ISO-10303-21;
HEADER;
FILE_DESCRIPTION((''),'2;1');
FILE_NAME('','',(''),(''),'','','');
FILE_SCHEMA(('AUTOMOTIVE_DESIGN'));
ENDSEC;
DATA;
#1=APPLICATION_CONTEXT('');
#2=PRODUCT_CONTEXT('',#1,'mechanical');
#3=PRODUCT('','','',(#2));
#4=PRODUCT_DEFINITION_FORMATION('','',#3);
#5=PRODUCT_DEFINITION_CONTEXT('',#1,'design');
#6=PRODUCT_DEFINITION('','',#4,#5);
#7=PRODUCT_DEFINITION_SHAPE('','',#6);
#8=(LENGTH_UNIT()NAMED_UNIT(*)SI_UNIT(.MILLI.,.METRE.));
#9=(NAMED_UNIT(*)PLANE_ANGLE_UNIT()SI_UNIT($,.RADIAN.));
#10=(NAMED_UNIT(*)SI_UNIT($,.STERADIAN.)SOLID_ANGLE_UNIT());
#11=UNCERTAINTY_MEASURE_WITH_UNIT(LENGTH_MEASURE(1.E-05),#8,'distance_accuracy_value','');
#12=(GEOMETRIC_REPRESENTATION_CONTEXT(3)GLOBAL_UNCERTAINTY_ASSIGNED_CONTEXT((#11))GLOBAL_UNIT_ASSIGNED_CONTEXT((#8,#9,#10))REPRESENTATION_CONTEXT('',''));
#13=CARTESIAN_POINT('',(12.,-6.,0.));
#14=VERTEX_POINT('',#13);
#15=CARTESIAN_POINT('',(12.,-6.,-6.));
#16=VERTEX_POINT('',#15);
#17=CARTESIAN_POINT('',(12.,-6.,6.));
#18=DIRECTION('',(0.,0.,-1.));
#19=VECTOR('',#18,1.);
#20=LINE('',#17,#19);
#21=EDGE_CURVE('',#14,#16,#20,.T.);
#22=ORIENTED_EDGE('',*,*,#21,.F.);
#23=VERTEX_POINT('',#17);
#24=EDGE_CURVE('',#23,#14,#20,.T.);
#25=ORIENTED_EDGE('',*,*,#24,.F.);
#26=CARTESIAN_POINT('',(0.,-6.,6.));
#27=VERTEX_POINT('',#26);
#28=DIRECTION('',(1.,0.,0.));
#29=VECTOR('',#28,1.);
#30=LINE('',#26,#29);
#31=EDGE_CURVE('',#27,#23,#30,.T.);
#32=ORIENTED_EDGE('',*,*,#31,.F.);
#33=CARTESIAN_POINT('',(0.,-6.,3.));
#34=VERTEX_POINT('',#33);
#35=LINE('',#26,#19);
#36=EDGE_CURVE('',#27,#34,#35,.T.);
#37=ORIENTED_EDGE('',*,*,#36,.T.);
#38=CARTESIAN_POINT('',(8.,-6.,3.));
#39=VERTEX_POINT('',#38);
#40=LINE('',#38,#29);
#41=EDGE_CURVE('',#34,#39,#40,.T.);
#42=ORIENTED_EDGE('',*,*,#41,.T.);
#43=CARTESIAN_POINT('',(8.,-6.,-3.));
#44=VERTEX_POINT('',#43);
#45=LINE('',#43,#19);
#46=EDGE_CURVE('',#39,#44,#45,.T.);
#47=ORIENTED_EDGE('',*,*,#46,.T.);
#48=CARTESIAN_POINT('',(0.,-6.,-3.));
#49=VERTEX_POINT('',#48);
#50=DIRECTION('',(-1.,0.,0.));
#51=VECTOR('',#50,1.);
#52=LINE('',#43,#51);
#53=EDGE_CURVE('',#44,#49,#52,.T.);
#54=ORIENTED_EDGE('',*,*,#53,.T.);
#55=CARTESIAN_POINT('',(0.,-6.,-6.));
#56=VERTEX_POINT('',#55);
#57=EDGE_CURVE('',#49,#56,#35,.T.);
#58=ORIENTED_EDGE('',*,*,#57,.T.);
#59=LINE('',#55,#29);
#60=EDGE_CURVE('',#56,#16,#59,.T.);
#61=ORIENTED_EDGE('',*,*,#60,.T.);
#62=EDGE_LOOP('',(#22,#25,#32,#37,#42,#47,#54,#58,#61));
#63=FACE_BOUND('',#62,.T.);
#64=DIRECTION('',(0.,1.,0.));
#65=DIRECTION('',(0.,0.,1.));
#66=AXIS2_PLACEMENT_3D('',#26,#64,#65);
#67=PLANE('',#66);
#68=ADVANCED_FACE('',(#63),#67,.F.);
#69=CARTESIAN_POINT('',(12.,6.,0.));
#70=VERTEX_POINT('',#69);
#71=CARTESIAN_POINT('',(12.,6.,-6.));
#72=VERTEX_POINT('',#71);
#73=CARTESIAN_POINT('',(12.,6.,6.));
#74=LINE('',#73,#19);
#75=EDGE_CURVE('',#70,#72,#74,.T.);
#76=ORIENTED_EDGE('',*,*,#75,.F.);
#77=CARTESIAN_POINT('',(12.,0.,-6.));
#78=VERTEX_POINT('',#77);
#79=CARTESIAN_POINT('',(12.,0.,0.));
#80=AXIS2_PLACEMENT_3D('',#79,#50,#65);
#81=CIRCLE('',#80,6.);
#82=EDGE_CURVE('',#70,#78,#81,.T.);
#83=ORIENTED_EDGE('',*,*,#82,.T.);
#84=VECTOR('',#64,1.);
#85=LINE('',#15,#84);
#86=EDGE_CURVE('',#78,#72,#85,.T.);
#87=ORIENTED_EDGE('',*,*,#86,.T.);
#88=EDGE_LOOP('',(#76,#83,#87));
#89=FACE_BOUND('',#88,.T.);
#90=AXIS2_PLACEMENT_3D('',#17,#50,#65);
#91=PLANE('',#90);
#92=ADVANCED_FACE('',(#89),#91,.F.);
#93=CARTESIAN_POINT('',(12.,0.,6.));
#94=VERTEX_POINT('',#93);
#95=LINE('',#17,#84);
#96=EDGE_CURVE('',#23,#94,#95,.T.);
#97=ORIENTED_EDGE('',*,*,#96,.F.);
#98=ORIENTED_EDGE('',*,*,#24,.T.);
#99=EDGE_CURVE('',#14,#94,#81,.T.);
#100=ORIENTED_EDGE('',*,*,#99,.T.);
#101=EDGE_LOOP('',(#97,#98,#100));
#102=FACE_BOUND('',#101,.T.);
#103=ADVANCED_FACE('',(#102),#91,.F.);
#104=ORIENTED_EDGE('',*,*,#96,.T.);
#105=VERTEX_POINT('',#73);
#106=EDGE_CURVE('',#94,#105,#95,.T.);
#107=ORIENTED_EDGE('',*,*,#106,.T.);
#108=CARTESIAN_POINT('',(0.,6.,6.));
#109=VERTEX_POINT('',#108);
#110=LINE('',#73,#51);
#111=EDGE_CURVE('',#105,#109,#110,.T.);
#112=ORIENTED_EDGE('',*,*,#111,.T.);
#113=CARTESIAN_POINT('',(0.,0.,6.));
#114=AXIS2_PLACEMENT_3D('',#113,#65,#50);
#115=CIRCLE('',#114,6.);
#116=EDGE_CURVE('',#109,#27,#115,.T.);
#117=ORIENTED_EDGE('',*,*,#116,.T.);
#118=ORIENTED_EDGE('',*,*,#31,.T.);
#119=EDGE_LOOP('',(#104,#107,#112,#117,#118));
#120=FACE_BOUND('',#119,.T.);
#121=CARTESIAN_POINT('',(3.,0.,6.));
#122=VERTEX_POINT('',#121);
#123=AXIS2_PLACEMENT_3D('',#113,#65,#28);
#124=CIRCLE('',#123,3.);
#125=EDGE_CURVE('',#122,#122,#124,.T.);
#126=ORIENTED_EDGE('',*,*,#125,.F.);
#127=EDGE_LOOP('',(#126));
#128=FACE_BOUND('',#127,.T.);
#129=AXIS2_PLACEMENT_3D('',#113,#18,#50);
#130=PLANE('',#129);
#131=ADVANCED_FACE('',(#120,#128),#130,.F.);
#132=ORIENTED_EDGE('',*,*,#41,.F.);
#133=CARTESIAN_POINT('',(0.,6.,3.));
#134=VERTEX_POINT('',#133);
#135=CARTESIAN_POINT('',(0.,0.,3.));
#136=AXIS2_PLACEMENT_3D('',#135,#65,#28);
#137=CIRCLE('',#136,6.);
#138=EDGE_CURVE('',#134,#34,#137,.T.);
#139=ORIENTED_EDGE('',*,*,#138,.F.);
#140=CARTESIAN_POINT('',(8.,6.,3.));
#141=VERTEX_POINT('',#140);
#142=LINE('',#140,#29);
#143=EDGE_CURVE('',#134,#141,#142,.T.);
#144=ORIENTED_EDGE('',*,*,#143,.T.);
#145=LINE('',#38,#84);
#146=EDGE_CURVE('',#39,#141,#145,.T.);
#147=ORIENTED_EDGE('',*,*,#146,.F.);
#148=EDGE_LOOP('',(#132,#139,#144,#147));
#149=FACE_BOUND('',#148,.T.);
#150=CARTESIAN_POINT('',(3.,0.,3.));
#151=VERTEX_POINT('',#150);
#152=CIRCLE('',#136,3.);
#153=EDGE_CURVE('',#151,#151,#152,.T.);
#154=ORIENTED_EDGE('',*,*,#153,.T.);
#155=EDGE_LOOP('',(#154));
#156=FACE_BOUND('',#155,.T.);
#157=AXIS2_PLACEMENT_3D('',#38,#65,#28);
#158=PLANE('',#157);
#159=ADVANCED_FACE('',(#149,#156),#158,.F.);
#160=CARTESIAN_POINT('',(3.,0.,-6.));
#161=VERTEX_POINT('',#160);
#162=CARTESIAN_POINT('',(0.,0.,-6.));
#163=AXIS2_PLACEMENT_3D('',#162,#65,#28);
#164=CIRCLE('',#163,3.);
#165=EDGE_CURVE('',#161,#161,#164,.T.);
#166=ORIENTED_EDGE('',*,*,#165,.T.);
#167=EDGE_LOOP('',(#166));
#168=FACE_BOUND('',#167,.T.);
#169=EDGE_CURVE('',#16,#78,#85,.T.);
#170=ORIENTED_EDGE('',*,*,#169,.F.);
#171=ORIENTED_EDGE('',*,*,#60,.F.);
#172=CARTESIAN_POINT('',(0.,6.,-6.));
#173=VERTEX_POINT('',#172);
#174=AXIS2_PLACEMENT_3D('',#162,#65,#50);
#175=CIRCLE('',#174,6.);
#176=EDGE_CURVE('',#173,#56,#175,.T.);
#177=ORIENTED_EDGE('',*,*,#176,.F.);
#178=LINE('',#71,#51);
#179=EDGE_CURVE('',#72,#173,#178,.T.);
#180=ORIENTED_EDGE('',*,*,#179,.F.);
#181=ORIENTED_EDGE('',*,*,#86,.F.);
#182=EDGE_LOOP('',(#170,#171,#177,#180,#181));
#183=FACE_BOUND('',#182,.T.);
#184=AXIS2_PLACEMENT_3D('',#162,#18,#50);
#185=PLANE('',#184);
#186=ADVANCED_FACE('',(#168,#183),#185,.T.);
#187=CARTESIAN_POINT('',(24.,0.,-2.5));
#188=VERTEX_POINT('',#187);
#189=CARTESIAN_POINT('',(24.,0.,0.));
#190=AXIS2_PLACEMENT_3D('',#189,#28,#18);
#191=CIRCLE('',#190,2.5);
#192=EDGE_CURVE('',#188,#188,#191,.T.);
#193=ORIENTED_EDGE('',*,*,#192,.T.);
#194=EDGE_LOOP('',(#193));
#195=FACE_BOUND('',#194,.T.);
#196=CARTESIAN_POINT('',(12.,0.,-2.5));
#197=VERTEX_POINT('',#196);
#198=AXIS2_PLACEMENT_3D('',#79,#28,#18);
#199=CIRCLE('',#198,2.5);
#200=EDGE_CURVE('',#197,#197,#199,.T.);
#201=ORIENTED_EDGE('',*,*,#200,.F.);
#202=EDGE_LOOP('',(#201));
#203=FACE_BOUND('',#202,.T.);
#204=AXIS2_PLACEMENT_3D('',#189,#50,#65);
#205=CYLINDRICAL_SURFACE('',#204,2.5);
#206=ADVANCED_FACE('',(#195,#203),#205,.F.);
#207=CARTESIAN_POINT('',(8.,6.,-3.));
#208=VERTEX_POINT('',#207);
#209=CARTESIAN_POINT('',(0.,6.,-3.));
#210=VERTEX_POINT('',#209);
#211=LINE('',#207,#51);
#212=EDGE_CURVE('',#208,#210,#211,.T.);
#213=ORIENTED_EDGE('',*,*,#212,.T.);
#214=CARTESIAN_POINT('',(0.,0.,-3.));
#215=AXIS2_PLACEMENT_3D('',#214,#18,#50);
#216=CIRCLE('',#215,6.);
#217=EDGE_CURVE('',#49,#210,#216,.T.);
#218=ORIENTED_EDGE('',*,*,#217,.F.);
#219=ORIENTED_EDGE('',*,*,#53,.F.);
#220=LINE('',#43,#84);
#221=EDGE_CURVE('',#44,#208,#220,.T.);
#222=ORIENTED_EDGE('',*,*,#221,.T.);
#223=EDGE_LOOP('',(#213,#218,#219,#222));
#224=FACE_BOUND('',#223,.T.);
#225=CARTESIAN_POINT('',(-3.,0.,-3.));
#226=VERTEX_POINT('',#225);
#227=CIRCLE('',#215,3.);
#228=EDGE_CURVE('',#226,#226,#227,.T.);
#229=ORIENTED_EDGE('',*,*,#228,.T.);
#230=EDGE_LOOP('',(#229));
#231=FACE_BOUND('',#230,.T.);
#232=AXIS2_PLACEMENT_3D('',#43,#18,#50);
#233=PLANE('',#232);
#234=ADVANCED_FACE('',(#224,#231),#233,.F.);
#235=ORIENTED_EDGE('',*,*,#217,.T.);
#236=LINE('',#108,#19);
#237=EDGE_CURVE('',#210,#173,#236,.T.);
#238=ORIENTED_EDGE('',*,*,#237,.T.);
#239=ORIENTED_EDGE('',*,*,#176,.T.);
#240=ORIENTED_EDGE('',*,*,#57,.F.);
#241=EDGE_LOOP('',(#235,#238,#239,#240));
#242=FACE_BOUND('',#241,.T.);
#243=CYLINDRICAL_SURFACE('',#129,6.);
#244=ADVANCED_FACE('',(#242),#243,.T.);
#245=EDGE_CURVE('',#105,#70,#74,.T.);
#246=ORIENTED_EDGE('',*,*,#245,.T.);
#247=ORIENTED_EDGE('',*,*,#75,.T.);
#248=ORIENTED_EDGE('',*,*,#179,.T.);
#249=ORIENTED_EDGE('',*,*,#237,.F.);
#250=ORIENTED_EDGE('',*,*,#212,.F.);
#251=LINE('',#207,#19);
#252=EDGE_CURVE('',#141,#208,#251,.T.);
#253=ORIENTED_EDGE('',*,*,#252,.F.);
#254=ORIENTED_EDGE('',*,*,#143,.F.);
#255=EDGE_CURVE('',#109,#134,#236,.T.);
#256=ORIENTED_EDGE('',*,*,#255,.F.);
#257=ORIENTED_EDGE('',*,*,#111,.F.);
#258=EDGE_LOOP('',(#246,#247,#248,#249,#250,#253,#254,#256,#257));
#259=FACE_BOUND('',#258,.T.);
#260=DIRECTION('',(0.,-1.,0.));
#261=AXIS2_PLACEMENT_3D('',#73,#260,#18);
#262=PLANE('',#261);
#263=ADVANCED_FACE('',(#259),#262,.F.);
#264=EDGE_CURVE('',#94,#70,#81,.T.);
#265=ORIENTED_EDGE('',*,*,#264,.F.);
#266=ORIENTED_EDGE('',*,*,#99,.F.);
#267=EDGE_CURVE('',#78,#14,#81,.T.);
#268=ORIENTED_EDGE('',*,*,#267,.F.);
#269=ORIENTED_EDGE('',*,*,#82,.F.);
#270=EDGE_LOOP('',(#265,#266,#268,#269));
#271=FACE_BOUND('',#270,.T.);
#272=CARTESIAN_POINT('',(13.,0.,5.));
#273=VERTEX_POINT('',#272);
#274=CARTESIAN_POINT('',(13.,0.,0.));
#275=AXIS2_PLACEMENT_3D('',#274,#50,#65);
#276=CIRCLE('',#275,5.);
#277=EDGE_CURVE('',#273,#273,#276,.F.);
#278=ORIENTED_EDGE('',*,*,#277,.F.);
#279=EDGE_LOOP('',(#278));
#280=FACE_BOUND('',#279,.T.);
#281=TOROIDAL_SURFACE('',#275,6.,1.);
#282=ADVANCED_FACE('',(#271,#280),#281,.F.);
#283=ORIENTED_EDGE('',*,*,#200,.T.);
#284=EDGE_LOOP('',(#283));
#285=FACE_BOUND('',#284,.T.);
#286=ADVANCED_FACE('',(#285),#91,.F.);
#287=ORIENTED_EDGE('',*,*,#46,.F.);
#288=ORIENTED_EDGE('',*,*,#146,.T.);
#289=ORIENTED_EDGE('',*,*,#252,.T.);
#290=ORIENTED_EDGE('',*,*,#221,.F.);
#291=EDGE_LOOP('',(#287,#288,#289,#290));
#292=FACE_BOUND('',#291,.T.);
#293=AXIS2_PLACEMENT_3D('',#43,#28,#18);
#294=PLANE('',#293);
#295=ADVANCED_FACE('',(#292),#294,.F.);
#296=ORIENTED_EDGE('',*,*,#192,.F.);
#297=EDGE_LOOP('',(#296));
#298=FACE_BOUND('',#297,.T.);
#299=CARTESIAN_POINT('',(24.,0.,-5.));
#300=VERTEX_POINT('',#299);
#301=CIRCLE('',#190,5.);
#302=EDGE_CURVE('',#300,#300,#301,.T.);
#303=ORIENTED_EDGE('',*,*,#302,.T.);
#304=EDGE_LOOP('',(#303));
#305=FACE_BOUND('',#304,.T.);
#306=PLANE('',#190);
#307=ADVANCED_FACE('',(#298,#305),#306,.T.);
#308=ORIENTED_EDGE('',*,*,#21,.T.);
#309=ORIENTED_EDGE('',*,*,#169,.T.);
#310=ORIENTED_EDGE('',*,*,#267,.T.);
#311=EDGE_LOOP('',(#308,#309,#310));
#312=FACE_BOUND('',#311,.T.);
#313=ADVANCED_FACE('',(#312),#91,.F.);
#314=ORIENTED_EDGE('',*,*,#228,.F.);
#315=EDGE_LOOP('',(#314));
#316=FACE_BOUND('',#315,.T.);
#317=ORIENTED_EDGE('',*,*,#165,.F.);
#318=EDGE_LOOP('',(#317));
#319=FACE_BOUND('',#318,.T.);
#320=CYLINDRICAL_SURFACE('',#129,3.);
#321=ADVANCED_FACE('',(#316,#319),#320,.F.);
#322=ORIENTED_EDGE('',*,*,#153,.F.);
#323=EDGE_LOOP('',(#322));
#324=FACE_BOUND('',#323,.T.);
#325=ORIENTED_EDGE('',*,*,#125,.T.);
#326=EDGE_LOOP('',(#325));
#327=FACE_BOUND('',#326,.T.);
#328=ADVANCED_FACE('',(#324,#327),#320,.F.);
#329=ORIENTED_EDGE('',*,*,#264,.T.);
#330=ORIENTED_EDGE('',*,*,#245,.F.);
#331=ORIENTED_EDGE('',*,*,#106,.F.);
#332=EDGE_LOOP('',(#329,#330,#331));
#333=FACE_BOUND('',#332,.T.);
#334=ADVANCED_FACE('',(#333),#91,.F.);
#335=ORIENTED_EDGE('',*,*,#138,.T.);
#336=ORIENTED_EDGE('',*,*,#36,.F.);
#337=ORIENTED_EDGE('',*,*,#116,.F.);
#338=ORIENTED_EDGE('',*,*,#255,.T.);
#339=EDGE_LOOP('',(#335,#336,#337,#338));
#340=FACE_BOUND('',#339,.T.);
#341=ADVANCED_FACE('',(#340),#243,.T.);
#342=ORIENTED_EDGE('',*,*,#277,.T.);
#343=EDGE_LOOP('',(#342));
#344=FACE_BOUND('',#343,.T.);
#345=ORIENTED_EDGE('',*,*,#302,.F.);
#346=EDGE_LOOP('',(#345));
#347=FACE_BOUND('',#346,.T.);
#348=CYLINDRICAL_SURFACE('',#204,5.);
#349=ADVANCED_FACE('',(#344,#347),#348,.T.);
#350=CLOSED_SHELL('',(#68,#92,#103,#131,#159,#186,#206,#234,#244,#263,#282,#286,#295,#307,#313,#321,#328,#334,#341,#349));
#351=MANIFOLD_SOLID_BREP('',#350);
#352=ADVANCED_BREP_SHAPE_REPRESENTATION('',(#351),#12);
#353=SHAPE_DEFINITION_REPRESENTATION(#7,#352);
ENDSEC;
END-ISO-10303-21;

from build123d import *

# Parameters (mm, degrees)
SKETCH1_R               = 3
BOSS_EXTRUDE1_DEPTH     = 6
CUT_EXTRUDE1_DEPTH      = 15.696938457
CUT_EXTRUDE1_DEPTH_BACK = 15.696938457
SKETCH2_W               = 14
SKETCH2_H               = 6
SKETCH3_R               = 5
SKETCH3_R_2             = 2.5
BOSS_EXTRUDE2_DEPTH     = 12
FILLET1_R               = 1


with BuildPart() as part:
    # Sketch1 → Boss-Extrude1 (new, symmetric)
    with BuildSketch(Plane.XY):
        with BuildLine():
            Line((0, -6), (12, -6))
            Line((12, -6), (12, 6))
            Line((12, 6), (0, 6))
            ThreePointArc((0, 6), (-6, 0), (0, -6))
        make_face()
        Circle(SKETCH1_R, mode=Mode.SUBTRACT)
    extrude(amount=BOSS_EXTRUDE1_DEPTH, both=True)

    # Sketch2 → Cut-Extrude1 (cut, two sides: drawn at the far end of the back side and taken through both)
    with BuildSketch(Plane(origin=(0, 0, 0), x_dir=(1, 0, 0), z_dir=(0, 1, 0)).offset(-CUT_EXTRUDE1_DEPTH_BACK)):
        with Locations((1, 0)):
            Rectangle(SKETCH2_W, SKETCH2_H)
    extrude(amount=CUT_EXTRUDE1_DEPTH + CUT_EXTRUDE1_DEPTH_BACK, mode=Mode.SUBTRACT)

    # Sketch3 → Boss-Extrude2 (add)
    with BuildSketch(Plane(origin=(12, 0, 0), x_dir=(0, 0, -1), z_dir=(1, 0, 0))):
        with Locations(Location((0, 0, 0), (0, 0, 180))):
            Circle(SKETCH3_R)
        Circle(SKETCH3_R_2, mode=Mode.SUBTRACT)
    extrude(amount=BOSS_EXTRUDE2_DEPTH)

    # Fillet1
    fillet1_edges = [part.edges().sort_by_distance(p)[0] for p in [
        (12, 0, -5),
    ]]
    fillet(fillet1_edges, radius=FILLET1_R - 0.0001)  # a hair under: the kernel refuses the full size


solid = part.part
